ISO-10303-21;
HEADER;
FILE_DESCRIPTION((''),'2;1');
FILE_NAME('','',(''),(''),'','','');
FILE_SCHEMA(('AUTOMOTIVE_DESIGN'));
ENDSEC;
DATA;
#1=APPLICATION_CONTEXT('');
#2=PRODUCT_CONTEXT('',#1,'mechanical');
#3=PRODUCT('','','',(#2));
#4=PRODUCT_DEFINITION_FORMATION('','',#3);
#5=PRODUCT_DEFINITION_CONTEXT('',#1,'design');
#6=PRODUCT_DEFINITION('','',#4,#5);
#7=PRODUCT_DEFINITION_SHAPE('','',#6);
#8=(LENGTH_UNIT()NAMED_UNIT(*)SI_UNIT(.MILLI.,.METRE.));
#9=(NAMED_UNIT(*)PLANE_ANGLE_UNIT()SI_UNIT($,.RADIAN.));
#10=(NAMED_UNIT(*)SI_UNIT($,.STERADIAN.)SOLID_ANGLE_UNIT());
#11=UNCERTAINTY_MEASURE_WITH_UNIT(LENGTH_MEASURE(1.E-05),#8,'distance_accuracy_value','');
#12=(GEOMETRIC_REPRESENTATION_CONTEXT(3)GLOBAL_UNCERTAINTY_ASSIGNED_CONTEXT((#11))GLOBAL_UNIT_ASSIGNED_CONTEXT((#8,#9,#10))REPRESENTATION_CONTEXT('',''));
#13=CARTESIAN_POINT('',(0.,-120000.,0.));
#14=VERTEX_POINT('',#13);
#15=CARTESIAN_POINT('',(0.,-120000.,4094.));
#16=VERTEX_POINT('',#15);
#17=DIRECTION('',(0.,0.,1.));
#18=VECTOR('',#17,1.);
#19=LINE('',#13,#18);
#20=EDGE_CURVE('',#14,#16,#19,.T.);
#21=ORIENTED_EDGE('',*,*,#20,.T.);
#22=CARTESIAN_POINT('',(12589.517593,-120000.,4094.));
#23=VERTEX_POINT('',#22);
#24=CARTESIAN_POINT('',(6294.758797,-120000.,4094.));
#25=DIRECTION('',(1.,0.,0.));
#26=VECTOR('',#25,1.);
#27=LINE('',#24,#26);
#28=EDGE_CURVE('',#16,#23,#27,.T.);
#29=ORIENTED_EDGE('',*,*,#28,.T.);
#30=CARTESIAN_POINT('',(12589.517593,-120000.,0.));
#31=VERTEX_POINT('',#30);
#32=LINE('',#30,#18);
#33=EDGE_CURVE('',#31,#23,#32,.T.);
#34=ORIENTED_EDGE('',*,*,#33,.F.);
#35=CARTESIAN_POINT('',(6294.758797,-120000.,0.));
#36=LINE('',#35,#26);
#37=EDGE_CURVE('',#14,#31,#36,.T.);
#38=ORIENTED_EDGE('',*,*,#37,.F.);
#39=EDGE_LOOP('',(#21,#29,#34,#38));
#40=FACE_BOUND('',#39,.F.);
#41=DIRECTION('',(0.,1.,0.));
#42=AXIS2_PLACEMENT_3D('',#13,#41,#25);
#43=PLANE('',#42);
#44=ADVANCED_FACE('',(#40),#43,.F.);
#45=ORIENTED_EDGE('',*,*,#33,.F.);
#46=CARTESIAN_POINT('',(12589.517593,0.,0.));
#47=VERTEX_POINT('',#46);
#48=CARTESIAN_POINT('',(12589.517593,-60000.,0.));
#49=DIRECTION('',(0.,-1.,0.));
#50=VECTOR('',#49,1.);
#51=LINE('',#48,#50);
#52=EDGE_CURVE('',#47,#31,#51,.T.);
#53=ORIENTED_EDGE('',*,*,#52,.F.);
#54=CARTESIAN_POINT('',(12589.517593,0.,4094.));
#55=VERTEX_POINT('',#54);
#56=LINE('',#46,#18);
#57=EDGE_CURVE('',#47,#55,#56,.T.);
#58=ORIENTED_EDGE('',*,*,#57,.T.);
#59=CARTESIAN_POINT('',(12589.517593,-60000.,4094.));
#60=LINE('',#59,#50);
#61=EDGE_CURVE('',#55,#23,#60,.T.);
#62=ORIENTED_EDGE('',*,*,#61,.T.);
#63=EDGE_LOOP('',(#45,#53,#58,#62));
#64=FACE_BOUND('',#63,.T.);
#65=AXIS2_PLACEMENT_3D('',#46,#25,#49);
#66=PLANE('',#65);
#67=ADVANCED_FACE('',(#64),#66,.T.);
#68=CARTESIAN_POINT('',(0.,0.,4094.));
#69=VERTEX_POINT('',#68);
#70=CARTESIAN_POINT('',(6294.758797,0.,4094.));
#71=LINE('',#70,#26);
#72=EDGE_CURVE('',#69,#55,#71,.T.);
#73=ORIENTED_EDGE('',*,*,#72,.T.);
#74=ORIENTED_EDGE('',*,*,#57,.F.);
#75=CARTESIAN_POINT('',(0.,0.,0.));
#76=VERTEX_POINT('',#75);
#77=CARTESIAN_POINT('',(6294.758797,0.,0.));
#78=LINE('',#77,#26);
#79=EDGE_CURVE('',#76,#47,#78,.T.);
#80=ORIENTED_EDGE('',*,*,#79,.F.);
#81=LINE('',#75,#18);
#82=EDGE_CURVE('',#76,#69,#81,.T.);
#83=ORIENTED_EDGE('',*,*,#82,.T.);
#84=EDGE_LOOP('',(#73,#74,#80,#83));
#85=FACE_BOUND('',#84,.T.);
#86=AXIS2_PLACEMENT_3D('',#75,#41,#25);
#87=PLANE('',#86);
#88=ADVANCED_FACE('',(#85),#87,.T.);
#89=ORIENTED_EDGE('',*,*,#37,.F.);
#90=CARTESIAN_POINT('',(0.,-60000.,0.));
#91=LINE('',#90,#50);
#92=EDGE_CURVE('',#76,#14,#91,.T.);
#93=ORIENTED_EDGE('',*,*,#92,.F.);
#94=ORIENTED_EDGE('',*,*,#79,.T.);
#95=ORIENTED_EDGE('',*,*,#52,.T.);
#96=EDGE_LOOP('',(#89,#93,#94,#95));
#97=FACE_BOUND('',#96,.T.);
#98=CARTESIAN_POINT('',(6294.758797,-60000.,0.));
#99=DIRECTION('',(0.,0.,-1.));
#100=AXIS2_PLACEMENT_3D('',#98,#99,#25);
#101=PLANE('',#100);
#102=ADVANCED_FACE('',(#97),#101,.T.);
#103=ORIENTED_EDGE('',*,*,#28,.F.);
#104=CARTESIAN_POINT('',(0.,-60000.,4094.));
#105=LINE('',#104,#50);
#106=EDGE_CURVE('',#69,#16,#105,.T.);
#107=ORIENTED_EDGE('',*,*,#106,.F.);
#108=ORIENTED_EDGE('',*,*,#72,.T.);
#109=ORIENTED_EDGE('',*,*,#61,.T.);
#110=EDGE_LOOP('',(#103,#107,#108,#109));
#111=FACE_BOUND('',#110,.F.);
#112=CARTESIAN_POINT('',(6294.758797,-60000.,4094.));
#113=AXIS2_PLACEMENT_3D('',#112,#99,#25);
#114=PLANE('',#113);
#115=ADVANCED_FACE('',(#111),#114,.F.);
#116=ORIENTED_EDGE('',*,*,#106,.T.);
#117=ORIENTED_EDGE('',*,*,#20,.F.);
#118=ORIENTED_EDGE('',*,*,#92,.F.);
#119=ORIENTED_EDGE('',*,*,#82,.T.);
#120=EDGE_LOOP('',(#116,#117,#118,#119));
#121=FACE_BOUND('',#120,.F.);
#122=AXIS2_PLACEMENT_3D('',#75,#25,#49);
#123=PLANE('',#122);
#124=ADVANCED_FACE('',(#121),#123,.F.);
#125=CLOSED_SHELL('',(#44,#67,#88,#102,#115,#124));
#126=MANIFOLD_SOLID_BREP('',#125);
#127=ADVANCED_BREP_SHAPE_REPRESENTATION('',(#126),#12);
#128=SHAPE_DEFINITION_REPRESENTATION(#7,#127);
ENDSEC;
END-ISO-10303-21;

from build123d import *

# Parameters (mm, degrees)
F1_E0_W  = 12589.5175933838
F1_E0_H  = 120000
F2_DEPTH = 4094


with BuildPart() as f2:
    # F1_E0 (on explicit) → F2 (new body)
    with BuildSketch(Plane(origin=(0, 0, 0), x_dir=(1, 0, 0), z_dir=(0, 0, -1))):
        with Locations((6294.7587966919, 60000)):
            Rectangle(F1_E0_W, F1_E0_H)
    extrude(amount=-F2_DEPTH)


solid = f2.part
